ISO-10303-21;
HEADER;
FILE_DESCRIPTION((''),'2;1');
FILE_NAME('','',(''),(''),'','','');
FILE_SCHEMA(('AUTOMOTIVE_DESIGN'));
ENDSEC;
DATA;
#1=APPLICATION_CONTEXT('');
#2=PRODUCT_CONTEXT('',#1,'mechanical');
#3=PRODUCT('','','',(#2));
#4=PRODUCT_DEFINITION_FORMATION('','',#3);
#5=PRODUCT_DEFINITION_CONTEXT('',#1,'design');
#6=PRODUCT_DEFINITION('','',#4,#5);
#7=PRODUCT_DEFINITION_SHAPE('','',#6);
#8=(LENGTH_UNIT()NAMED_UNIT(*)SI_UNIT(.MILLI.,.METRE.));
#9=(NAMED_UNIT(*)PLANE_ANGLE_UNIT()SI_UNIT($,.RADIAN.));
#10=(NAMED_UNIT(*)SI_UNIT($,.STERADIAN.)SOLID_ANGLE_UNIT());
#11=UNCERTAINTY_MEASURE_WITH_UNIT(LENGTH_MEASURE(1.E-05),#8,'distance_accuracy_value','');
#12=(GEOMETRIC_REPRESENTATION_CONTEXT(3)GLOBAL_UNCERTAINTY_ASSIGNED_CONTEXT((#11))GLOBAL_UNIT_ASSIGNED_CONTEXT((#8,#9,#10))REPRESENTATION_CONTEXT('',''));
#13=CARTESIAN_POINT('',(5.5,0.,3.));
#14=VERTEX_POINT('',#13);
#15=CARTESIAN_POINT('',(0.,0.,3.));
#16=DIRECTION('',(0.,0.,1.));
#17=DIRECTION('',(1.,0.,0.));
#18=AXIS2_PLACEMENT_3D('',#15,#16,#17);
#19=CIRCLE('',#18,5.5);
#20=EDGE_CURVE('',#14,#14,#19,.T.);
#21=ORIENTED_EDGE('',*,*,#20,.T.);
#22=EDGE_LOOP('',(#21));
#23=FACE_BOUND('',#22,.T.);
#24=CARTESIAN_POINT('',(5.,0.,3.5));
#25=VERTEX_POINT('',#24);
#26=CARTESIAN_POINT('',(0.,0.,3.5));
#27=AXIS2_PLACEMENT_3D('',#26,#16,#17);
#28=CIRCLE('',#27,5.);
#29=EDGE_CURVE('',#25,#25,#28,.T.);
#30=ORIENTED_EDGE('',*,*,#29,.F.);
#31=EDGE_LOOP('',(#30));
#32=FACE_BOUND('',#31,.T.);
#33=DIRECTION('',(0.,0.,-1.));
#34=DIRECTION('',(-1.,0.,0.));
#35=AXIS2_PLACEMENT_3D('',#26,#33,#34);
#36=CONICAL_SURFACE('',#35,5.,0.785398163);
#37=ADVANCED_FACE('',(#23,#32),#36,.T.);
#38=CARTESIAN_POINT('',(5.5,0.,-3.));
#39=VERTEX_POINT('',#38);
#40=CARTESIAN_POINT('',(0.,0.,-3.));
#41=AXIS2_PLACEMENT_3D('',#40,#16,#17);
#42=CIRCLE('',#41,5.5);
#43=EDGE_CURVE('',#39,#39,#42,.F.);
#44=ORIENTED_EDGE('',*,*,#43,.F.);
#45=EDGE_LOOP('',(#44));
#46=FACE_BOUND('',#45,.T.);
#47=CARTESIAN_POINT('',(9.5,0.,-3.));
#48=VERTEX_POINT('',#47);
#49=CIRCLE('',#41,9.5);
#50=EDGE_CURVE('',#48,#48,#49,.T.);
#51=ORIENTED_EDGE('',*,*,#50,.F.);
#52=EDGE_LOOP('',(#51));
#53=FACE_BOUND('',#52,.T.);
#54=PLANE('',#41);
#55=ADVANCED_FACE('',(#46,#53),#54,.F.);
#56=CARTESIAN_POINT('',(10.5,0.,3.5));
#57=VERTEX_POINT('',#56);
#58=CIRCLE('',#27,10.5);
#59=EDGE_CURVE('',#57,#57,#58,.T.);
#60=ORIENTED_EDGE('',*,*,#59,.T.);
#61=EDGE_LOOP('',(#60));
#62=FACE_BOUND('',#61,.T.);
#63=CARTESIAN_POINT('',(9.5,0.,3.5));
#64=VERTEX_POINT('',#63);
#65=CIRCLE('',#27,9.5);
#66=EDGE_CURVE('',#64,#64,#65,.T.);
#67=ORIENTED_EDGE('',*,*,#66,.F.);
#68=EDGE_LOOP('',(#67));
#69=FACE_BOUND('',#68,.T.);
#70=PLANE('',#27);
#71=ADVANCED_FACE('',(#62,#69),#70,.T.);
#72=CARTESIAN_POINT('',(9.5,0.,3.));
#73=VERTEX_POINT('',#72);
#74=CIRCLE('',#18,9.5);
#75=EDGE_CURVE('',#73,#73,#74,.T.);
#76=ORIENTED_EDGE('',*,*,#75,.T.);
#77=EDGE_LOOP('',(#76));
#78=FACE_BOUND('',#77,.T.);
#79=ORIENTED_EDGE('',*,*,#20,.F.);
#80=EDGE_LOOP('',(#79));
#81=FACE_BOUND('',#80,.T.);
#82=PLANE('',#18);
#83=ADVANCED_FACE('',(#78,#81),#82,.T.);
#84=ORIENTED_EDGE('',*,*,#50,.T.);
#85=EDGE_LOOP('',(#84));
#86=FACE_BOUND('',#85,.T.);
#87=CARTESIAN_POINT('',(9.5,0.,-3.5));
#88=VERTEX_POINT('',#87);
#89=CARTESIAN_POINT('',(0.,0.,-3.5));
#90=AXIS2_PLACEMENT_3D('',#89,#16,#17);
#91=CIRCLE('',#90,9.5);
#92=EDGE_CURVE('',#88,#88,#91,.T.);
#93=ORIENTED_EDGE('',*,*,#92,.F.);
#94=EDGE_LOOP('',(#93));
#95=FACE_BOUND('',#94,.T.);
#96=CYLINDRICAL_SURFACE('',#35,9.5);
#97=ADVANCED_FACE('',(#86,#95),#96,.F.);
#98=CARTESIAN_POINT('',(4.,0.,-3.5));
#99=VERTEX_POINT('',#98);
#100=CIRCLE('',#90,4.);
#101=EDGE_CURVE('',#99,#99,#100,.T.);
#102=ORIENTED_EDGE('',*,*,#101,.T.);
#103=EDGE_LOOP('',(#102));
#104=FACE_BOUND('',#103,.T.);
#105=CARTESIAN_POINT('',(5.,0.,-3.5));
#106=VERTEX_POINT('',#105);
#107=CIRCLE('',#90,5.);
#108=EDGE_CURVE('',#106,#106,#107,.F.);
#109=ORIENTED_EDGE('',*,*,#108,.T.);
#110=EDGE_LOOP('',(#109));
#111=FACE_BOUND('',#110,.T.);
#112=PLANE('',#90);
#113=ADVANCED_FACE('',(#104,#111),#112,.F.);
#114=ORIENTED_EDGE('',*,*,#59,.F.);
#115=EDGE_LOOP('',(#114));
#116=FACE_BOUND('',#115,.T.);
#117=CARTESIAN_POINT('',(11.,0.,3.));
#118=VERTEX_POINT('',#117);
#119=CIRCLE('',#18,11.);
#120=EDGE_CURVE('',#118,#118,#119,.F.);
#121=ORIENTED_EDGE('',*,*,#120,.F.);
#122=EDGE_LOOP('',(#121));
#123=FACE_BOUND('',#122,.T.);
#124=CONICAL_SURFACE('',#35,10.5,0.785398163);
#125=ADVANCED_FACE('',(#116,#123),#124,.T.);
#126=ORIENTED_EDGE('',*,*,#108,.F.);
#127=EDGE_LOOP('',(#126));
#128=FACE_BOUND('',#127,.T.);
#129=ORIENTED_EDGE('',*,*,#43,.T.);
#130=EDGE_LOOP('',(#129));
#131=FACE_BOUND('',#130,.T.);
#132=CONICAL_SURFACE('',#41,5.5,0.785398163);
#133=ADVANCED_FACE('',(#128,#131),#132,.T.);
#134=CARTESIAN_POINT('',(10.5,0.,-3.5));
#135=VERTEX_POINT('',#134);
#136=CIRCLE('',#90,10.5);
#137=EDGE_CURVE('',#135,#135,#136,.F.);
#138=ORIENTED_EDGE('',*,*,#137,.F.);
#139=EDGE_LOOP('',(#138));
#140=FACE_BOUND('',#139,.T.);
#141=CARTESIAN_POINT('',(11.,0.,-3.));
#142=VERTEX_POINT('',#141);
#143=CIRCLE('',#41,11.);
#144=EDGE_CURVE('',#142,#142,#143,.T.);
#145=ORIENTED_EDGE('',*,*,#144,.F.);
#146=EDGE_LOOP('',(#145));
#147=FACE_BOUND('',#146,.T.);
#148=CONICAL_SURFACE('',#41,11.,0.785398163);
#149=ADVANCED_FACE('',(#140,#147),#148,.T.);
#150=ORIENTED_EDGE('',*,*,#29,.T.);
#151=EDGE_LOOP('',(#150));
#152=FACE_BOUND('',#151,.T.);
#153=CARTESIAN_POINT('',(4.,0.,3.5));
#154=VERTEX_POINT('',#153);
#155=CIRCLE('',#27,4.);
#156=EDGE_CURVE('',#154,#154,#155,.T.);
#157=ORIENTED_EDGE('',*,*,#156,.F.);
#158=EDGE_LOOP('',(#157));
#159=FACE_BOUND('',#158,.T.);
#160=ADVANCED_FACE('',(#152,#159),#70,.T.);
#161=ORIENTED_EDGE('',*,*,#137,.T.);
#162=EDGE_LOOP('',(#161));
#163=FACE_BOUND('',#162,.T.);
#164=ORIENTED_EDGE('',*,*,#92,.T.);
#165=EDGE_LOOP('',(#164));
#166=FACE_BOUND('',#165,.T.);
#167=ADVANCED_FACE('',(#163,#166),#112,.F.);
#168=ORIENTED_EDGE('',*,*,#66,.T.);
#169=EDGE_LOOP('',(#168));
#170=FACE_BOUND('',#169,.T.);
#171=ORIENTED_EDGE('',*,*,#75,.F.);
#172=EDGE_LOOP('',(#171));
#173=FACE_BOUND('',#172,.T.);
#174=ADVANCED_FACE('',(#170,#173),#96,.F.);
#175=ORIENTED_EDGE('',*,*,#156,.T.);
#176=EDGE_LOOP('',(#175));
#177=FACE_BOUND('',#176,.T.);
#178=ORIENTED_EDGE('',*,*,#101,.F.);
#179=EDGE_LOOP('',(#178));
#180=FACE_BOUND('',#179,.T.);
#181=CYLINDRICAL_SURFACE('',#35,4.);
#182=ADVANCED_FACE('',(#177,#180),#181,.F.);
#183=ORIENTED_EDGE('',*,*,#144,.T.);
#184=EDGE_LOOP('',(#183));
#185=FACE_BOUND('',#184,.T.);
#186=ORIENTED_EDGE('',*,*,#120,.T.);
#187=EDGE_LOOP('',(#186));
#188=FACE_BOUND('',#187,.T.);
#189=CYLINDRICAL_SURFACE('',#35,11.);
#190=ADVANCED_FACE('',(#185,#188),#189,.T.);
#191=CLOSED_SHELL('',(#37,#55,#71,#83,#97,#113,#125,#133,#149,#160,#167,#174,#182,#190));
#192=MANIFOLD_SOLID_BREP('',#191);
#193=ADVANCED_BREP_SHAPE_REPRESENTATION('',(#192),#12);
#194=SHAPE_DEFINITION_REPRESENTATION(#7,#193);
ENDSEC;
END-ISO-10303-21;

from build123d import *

# Parameters (mm, degrees)
SKETCH1_R             = 11
SKETCH1_R_2           = 9.5
BOSS_EXTRUDE1_DEPTH   = 3.5
SKETCH1_R_3           = 5.5
SKETCH1_R_4           = 4
BOSS_EXTRUDE1_2_DEPTH = 3.5
SKETCH1_3_R           = 9.5
SKETCH1_3_R_2         = 5.5
BOSS_EXTRUDE2_DEPTH   = 3
CHAMFER1_SIZE         = 0.5


with BuildPart() as part:
    # Sketch1 → Boss-Extrude1 (new, symmetric)
    with BuildSketch(Plane.XY):
        Circle(SKETCH1_R)
        Circle(SKETCH1_R_2, mode=Mode.SUBTRACT)
    extrude(amount=BOSS_EXTRUDE1_DEPTH, both=True)



with BuildPart() as body_2:
    # Sketch1 → Boss-Extrude1 2 (new, symmetric)
    with BuildSketch(Plane.XY):
        Circle(SKETCH1_R_3)
        Circle(SKETCH1_R_4, mode=Mode.SUBTRACT)
    extrude(amount=BOSS_EXTRUDE1_2_DEPTH, both=True)


with BuildPart() as part_1:
    add(part.part)

    add(body_2.part)  # Boss-Extrude2 merges body 2
    # Sketch1<3> → Boss-Extrude2 (add, symmetric)
    with BuildSketch(Plane.XY):
        Circle(SKETCH1_3_R)
        Circle(SKETCH1_3_R_2, mode=Mode.SUBTRACT)
    extrude(amount=BOSS_EXTRUDE2_DEPTH, both=True)

    # Chamfer1
    chamfer1_edges = [part_1.edges().sort_by_distance(p)[0] for p in [
        (-5.5, 0, -3.5),
        (-5.5, 0, 3.5),
        (-11, 0, -3.5),
        (-11, 0, 3.5),
    ]]
    chamfer(chamfer1_edges, length=CHAMFER1_SIZE - 0.0001)  # a hair under: the kernel refuses the full size


solid = part_1.part
